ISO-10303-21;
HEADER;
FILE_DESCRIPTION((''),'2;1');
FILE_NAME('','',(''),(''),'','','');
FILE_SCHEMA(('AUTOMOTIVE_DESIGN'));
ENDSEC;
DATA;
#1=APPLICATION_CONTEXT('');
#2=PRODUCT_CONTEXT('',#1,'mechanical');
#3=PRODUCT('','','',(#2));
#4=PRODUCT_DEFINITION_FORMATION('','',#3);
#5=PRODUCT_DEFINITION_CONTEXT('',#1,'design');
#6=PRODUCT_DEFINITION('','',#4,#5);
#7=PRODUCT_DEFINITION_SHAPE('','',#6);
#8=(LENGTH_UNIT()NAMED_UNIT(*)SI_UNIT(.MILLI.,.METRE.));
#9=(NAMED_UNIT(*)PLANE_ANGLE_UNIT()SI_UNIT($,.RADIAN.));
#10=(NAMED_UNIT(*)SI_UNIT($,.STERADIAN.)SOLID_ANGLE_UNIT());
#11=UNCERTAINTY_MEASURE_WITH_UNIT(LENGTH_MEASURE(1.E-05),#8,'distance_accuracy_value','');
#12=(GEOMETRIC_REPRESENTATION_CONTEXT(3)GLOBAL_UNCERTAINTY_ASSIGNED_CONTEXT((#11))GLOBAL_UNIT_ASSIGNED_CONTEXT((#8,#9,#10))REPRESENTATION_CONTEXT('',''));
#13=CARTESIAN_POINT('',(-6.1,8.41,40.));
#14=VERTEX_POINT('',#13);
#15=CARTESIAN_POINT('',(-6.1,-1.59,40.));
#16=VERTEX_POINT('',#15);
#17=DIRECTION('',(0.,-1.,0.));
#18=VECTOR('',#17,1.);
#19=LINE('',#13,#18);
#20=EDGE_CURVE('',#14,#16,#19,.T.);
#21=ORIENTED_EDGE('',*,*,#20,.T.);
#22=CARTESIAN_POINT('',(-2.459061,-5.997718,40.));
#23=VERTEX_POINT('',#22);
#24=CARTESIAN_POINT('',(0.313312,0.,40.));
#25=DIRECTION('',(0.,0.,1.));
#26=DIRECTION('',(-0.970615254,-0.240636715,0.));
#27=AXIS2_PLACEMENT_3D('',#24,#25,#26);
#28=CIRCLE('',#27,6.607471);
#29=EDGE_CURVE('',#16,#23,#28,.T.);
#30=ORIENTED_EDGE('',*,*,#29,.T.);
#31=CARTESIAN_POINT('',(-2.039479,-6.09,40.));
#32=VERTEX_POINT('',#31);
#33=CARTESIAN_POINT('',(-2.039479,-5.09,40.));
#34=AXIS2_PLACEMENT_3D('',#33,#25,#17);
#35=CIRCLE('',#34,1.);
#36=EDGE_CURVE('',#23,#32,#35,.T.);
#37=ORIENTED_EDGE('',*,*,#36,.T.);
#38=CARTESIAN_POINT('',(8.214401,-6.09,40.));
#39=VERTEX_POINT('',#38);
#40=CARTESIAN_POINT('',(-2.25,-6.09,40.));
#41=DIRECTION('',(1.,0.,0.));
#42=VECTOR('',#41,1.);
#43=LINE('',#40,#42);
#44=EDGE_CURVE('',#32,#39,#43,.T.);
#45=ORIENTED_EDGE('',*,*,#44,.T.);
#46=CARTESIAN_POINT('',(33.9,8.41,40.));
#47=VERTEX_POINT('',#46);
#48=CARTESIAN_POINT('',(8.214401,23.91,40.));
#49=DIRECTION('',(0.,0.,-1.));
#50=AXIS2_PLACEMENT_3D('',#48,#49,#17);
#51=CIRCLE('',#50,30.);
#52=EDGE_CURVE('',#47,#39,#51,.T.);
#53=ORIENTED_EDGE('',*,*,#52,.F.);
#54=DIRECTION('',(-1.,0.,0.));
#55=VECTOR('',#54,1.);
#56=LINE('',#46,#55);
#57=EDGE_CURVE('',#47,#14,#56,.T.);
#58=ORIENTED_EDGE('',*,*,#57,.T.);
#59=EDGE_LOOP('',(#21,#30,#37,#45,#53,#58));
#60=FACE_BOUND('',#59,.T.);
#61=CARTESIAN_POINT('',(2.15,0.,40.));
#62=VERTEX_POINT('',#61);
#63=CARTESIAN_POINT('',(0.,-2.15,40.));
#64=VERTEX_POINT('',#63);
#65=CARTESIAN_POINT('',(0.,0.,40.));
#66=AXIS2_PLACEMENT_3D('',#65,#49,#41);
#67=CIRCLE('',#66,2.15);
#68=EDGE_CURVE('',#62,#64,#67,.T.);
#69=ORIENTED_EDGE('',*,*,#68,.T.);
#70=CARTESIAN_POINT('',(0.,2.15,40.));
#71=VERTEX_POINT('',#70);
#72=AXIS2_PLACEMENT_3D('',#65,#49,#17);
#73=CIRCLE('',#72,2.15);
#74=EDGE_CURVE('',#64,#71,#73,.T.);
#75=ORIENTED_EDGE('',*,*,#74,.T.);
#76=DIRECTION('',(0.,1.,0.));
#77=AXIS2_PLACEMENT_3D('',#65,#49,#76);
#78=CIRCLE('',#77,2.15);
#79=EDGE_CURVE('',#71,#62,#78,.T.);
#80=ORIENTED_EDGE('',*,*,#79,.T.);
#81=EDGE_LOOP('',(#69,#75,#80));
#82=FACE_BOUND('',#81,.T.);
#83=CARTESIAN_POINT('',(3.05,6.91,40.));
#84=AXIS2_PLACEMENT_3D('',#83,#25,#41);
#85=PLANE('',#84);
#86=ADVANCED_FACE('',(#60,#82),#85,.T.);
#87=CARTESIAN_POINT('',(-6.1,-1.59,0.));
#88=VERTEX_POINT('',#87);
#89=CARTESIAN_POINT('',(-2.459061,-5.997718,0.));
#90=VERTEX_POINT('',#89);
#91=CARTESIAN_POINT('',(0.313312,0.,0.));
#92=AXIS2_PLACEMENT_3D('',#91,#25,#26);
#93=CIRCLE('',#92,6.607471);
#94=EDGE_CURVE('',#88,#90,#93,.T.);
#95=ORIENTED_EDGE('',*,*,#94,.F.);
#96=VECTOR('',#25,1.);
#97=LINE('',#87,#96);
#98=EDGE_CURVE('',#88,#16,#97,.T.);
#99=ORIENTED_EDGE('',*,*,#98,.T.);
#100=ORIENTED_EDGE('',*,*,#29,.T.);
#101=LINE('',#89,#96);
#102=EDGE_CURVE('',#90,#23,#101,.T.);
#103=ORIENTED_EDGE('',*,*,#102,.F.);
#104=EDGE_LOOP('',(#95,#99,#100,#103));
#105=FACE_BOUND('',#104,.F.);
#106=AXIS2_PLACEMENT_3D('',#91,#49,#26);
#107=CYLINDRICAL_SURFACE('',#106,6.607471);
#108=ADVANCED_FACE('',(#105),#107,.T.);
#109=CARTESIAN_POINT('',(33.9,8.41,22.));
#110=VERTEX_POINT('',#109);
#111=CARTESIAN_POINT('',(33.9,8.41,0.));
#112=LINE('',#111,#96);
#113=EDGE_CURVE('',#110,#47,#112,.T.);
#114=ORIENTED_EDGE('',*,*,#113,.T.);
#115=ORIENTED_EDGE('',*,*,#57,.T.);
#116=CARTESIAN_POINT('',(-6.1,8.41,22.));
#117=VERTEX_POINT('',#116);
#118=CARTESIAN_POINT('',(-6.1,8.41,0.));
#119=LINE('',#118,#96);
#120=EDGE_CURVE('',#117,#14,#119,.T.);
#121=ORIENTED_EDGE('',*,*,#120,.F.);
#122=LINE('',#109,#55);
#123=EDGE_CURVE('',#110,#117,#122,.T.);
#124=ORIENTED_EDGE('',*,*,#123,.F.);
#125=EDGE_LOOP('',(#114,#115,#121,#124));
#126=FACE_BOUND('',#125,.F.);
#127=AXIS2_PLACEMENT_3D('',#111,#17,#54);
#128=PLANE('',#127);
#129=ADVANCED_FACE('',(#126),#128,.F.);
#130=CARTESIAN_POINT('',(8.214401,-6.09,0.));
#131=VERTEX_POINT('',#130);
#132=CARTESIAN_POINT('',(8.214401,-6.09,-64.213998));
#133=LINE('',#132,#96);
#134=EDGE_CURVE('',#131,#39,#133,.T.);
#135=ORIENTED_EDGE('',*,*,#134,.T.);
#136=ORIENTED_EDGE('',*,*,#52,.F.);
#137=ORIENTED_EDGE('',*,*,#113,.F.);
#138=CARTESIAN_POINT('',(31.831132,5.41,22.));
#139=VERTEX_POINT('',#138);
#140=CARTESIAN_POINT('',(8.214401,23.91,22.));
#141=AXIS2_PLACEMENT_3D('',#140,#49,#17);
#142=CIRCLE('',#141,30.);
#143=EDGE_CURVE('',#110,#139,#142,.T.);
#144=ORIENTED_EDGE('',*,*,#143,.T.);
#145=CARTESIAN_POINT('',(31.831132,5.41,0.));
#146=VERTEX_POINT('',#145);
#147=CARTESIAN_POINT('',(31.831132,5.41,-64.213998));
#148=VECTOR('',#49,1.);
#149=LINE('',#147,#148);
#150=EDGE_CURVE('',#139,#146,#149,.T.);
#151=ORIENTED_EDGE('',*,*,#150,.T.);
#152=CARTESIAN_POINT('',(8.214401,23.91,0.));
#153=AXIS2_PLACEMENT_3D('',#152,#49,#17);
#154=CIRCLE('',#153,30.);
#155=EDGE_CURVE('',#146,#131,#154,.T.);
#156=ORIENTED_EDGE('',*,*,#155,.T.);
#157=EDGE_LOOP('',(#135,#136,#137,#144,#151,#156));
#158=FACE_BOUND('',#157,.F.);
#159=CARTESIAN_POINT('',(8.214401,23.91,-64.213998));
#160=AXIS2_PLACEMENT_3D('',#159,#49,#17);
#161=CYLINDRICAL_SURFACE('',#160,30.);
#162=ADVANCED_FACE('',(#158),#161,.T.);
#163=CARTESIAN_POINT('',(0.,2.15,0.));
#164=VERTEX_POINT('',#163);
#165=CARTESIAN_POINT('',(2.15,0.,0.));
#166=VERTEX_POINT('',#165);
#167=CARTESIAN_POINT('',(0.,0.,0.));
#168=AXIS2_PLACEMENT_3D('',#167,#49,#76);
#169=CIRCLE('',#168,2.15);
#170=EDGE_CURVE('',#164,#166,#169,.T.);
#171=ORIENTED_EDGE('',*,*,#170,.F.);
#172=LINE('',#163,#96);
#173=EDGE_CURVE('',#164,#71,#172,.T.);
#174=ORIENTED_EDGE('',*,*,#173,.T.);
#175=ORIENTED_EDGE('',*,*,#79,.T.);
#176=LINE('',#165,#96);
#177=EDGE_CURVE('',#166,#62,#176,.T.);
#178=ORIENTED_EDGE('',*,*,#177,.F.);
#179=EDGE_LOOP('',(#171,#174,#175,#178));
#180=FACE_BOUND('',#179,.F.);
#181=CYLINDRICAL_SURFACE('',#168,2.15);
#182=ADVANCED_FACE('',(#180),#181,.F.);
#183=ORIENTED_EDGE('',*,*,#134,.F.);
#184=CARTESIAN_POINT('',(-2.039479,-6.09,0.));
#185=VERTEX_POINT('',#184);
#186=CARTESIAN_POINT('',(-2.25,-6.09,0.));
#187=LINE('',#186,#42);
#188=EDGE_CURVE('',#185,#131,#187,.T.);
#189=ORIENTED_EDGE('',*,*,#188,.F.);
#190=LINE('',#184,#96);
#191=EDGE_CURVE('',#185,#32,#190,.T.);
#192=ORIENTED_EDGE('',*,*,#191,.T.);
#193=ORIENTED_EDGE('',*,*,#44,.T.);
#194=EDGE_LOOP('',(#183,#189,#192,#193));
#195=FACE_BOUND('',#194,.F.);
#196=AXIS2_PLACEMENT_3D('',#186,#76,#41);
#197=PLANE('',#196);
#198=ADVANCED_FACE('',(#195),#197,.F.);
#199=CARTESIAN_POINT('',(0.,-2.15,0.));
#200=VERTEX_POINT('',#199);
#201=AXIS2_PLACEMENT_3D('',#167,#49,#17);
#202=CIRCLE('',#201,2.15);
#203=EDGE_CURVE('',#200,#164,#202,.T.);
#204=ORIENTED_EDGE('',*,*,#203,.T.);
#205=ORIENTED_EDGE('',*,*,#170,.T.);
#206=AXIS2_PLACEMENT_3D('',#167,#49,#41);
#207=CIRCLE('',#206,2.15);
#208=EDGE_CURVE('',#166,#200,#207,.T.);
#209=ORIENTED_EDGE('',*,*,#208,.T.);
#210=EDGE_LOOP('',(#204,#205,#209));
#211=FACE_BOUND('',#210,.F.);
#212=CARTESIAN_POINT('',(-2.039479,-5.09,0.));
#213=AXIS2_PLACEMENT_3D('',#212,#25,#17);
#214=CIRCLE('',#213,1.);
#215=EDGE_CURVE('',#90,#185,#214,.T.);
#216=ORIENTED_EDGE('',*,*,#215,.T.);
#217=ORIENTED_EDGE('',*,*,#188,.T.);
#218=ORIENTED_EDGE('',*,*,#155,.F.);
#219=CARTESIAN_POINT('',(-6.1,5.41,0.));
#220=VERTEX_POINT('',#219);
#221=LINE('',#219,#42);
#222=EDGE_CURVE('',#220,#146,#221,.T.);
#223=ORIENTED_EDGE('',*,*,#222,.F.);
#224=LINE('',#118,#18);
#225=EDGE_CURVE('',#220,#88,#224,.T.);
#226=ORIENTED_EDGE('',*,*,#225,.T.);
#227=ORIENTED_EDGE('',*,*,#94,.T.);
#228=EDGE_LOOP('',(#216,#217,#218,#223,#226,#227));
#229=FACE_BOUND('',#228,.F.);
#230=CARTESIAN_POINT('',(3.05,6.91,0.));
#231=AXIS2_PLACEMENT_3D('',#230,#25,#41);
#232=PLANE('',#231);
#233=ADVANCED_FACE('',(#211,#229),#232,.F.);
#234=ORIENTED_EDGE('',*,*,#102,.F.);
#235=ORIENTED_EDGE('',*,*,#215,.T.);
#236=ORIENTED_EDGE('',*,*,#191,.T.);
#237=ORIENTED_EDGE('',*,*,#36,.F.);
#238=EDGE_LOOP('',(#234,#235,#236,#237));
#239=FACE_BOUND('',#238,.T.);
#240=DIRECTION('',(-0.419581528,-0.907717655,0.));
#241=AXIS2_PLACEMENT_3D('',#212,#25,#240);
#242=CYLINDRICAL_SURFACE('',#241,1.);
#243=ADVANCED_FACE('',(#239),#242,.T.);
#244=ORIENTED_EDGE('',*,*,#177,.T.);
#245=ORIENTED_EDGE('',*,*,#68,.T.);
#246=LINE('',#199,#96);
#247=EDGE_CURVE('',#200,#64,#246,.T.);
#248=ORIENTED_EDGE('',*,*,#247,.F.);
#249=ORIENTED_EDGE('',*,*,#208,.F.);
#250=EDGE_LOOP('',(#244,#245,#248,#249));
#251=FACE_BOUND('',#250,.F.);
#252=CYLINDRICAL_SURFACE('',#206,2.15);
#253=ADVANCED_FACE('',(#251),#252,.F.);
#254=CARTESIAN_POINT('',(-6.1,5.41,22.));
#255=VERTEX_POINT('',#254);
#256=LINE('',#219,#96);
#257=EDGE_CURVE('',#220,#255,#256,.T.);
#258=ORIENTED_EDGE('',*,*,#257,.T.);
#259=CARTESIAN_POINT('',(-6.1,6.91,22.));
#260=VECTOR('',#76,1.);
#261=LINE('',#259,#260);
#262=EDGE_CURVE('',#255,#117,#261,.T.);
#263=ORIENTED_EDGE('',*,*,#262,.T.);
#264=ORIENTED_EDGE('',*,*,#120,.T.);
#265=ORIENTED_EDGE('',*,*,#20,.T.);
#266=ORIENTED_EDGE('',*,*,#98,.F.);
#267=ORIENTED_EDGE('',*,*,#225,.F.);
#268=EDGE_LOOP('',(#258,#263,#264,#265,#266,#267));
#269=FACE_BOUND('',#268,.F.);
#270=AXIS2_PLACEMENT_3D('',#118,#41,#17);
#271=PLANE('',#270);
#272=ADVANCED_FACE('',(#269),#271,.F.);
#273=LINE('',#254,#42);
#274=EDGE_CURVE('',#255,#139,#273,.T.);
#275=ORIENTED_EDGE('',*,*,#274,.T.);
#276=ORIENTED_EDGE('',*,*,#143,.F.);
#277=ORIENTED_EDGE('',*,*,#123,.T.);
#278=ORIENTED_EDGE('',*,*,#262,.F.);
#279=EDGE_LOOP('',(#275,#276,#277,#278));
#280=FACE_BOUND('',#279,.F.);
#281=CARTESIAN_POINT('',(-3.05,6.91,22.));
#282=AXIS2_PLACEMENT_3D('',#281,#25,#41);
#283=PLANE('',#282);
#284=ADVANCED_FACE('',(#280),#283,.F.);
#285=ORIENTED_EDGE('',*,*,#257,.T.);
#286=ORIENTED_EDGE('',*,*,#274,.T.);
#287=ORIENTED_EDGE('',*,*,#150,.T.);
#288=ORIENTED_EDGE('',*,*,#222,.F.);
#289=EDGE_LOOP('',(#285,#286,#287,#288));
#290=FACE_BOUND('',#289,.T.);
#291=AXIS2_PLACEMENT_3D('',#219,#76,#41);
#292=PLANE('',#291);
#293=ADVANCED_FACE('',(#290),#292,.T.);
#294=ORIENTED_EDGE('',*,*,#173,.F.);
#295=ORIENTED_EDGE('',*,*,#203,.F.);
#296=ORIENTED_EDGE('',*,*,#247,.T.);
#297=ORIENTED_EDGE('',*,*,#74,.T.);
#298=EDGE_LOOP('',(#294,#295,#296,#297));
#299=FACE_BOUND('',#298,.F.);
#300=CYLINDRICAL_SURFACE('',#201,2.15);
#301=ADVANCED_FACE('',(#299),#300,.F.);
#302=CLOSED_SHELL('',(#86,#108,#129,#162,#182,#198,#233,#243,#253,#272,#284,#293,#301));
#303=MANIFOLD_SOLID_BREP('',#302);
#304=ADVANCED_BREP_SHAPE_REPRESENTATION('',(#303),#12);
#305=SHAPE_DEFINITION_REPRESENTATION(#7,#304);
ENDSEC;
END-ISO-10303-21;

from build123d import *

# Parameters (mm, degrees)
F0_W        = 6.1
F0_H        = 3
F0_W_2      = 27.8
F1_DEPTH    = 40
F2_R        = 1
F3_T1_DEPTH = 168.4279953904
F4_DEPTH    = 22


# Not quite as in the source:
# - a fillet or chamfer that OpenCascade refuses, or shapes differently, is made with other operations: its cross-section is extruded or revolved along the edge and cut away or added


with BuildPart() as f1:
    # F0 (on Top) → F1 (new body)
    with BuildSketch(Plane.XY):
        with Locations((3.05, 6.91)):
            Rectangle(F0_W, F0_H)
        with Locations((-3.05, 6.91)):
            Rectangle(F0_W, F0_H)
        with BuildLine():
            Line((6.1, -1.59), (6.1, 5.41))
            Line((6.1, 5.41), (0, 5.41))
            Line((0, 5.41), (0, 2.15))
            ThreePointArc((0, 2.15), (1.5202795796, 1.5202795796), (2.15, 0))
            ThreePointArc((2.15, 0), (1.5202795796, -1.5202795796), (0, -2.15))
            Line((0, -2.15), (0, -6.09))
            Line((0, -6.09), (2.25, -6.09))
            ThreePointArc((2.25, -6.09), (4.7073896383, -4.2954889128), (6.1, -1.59))
        make_face()
        with Locations((20, 6.91)):
            Rectangle(F0_W_2, F0_H)
        with BuildLine():
            Line((33.9, 5.41), (6.1, 5.41))
            Line((6.1, 5.41), (6.1, -1.59))
            ThreePointArc((6.1, -1.59), (4.7073896383, -4.2954889128), (2.25, -6.09))
            Line((2.25, -6.09), (33.9, -6.09))
            Line((33.9, -6.09), (33.9, 5.41))
        make_face()
        with BuildLine():
            Line((0, 2.15), (0, 5.41))
            Line((0, 5.41), (-6.1, 5.41))
            Line((-6.1, 5.41), (-6.1, -1.59))
            ThreePointArc((-6.1, -1.59), (-4.7073896383, -4.2954889128), (-2.25, -6.09))
            Line((-2.25, -6.09), (0, -6.09))
            Line((0, -6.09), (0, -2.15))
            ThreePointArc((0, -2.15), (-2.15, 0), (0, 2.15))
        make_face()
    extrude(amount=F1_DEPTH)

    # F2
    f2_edges = [f1.edges().sort_by_distance(p)[0] for p in [
        (-2.25, -6.09, 20),
    ]]
    fillet(f2_edges, radius=F2_R)

    # F3: fillet of radius 30 on 1 edges, made by hand

    # F3_s2 → F3_t1 (cut)
    with BuildSketch(Plane.XY.offset(-64.2139976952)):
        with BuildLine():
            ThreePointArc((8.2144009219, -6.09), (22.9622821257, -2.2147009552), (33.9, 8.41))
            Line((33.9, 8.41), (33.9, -6.09))
            Line((33.9, -6.09), (8.2144009219, -6.09))
        make_face()
    extrude(amount=F3_T1_DEPTH, mode=Mode.SUBTRACT)

    # F0 (on Top) → F4 (cut)
    with BuildSketch(Plane.XY):
        with Locations((-3.05, 6.91)):
            Rectangle(F0_W, F0_H)
        with Locations((3.05, 6.91)):
            Rectangle(F0_W, F0_H)
        with Locations((20, 6.91)):
            Rectangle(F0_W_2, F0_H)
    extrude(amount=F4_DEPTH, mode=Mode.SUBTRACT)


solid = f1.part
